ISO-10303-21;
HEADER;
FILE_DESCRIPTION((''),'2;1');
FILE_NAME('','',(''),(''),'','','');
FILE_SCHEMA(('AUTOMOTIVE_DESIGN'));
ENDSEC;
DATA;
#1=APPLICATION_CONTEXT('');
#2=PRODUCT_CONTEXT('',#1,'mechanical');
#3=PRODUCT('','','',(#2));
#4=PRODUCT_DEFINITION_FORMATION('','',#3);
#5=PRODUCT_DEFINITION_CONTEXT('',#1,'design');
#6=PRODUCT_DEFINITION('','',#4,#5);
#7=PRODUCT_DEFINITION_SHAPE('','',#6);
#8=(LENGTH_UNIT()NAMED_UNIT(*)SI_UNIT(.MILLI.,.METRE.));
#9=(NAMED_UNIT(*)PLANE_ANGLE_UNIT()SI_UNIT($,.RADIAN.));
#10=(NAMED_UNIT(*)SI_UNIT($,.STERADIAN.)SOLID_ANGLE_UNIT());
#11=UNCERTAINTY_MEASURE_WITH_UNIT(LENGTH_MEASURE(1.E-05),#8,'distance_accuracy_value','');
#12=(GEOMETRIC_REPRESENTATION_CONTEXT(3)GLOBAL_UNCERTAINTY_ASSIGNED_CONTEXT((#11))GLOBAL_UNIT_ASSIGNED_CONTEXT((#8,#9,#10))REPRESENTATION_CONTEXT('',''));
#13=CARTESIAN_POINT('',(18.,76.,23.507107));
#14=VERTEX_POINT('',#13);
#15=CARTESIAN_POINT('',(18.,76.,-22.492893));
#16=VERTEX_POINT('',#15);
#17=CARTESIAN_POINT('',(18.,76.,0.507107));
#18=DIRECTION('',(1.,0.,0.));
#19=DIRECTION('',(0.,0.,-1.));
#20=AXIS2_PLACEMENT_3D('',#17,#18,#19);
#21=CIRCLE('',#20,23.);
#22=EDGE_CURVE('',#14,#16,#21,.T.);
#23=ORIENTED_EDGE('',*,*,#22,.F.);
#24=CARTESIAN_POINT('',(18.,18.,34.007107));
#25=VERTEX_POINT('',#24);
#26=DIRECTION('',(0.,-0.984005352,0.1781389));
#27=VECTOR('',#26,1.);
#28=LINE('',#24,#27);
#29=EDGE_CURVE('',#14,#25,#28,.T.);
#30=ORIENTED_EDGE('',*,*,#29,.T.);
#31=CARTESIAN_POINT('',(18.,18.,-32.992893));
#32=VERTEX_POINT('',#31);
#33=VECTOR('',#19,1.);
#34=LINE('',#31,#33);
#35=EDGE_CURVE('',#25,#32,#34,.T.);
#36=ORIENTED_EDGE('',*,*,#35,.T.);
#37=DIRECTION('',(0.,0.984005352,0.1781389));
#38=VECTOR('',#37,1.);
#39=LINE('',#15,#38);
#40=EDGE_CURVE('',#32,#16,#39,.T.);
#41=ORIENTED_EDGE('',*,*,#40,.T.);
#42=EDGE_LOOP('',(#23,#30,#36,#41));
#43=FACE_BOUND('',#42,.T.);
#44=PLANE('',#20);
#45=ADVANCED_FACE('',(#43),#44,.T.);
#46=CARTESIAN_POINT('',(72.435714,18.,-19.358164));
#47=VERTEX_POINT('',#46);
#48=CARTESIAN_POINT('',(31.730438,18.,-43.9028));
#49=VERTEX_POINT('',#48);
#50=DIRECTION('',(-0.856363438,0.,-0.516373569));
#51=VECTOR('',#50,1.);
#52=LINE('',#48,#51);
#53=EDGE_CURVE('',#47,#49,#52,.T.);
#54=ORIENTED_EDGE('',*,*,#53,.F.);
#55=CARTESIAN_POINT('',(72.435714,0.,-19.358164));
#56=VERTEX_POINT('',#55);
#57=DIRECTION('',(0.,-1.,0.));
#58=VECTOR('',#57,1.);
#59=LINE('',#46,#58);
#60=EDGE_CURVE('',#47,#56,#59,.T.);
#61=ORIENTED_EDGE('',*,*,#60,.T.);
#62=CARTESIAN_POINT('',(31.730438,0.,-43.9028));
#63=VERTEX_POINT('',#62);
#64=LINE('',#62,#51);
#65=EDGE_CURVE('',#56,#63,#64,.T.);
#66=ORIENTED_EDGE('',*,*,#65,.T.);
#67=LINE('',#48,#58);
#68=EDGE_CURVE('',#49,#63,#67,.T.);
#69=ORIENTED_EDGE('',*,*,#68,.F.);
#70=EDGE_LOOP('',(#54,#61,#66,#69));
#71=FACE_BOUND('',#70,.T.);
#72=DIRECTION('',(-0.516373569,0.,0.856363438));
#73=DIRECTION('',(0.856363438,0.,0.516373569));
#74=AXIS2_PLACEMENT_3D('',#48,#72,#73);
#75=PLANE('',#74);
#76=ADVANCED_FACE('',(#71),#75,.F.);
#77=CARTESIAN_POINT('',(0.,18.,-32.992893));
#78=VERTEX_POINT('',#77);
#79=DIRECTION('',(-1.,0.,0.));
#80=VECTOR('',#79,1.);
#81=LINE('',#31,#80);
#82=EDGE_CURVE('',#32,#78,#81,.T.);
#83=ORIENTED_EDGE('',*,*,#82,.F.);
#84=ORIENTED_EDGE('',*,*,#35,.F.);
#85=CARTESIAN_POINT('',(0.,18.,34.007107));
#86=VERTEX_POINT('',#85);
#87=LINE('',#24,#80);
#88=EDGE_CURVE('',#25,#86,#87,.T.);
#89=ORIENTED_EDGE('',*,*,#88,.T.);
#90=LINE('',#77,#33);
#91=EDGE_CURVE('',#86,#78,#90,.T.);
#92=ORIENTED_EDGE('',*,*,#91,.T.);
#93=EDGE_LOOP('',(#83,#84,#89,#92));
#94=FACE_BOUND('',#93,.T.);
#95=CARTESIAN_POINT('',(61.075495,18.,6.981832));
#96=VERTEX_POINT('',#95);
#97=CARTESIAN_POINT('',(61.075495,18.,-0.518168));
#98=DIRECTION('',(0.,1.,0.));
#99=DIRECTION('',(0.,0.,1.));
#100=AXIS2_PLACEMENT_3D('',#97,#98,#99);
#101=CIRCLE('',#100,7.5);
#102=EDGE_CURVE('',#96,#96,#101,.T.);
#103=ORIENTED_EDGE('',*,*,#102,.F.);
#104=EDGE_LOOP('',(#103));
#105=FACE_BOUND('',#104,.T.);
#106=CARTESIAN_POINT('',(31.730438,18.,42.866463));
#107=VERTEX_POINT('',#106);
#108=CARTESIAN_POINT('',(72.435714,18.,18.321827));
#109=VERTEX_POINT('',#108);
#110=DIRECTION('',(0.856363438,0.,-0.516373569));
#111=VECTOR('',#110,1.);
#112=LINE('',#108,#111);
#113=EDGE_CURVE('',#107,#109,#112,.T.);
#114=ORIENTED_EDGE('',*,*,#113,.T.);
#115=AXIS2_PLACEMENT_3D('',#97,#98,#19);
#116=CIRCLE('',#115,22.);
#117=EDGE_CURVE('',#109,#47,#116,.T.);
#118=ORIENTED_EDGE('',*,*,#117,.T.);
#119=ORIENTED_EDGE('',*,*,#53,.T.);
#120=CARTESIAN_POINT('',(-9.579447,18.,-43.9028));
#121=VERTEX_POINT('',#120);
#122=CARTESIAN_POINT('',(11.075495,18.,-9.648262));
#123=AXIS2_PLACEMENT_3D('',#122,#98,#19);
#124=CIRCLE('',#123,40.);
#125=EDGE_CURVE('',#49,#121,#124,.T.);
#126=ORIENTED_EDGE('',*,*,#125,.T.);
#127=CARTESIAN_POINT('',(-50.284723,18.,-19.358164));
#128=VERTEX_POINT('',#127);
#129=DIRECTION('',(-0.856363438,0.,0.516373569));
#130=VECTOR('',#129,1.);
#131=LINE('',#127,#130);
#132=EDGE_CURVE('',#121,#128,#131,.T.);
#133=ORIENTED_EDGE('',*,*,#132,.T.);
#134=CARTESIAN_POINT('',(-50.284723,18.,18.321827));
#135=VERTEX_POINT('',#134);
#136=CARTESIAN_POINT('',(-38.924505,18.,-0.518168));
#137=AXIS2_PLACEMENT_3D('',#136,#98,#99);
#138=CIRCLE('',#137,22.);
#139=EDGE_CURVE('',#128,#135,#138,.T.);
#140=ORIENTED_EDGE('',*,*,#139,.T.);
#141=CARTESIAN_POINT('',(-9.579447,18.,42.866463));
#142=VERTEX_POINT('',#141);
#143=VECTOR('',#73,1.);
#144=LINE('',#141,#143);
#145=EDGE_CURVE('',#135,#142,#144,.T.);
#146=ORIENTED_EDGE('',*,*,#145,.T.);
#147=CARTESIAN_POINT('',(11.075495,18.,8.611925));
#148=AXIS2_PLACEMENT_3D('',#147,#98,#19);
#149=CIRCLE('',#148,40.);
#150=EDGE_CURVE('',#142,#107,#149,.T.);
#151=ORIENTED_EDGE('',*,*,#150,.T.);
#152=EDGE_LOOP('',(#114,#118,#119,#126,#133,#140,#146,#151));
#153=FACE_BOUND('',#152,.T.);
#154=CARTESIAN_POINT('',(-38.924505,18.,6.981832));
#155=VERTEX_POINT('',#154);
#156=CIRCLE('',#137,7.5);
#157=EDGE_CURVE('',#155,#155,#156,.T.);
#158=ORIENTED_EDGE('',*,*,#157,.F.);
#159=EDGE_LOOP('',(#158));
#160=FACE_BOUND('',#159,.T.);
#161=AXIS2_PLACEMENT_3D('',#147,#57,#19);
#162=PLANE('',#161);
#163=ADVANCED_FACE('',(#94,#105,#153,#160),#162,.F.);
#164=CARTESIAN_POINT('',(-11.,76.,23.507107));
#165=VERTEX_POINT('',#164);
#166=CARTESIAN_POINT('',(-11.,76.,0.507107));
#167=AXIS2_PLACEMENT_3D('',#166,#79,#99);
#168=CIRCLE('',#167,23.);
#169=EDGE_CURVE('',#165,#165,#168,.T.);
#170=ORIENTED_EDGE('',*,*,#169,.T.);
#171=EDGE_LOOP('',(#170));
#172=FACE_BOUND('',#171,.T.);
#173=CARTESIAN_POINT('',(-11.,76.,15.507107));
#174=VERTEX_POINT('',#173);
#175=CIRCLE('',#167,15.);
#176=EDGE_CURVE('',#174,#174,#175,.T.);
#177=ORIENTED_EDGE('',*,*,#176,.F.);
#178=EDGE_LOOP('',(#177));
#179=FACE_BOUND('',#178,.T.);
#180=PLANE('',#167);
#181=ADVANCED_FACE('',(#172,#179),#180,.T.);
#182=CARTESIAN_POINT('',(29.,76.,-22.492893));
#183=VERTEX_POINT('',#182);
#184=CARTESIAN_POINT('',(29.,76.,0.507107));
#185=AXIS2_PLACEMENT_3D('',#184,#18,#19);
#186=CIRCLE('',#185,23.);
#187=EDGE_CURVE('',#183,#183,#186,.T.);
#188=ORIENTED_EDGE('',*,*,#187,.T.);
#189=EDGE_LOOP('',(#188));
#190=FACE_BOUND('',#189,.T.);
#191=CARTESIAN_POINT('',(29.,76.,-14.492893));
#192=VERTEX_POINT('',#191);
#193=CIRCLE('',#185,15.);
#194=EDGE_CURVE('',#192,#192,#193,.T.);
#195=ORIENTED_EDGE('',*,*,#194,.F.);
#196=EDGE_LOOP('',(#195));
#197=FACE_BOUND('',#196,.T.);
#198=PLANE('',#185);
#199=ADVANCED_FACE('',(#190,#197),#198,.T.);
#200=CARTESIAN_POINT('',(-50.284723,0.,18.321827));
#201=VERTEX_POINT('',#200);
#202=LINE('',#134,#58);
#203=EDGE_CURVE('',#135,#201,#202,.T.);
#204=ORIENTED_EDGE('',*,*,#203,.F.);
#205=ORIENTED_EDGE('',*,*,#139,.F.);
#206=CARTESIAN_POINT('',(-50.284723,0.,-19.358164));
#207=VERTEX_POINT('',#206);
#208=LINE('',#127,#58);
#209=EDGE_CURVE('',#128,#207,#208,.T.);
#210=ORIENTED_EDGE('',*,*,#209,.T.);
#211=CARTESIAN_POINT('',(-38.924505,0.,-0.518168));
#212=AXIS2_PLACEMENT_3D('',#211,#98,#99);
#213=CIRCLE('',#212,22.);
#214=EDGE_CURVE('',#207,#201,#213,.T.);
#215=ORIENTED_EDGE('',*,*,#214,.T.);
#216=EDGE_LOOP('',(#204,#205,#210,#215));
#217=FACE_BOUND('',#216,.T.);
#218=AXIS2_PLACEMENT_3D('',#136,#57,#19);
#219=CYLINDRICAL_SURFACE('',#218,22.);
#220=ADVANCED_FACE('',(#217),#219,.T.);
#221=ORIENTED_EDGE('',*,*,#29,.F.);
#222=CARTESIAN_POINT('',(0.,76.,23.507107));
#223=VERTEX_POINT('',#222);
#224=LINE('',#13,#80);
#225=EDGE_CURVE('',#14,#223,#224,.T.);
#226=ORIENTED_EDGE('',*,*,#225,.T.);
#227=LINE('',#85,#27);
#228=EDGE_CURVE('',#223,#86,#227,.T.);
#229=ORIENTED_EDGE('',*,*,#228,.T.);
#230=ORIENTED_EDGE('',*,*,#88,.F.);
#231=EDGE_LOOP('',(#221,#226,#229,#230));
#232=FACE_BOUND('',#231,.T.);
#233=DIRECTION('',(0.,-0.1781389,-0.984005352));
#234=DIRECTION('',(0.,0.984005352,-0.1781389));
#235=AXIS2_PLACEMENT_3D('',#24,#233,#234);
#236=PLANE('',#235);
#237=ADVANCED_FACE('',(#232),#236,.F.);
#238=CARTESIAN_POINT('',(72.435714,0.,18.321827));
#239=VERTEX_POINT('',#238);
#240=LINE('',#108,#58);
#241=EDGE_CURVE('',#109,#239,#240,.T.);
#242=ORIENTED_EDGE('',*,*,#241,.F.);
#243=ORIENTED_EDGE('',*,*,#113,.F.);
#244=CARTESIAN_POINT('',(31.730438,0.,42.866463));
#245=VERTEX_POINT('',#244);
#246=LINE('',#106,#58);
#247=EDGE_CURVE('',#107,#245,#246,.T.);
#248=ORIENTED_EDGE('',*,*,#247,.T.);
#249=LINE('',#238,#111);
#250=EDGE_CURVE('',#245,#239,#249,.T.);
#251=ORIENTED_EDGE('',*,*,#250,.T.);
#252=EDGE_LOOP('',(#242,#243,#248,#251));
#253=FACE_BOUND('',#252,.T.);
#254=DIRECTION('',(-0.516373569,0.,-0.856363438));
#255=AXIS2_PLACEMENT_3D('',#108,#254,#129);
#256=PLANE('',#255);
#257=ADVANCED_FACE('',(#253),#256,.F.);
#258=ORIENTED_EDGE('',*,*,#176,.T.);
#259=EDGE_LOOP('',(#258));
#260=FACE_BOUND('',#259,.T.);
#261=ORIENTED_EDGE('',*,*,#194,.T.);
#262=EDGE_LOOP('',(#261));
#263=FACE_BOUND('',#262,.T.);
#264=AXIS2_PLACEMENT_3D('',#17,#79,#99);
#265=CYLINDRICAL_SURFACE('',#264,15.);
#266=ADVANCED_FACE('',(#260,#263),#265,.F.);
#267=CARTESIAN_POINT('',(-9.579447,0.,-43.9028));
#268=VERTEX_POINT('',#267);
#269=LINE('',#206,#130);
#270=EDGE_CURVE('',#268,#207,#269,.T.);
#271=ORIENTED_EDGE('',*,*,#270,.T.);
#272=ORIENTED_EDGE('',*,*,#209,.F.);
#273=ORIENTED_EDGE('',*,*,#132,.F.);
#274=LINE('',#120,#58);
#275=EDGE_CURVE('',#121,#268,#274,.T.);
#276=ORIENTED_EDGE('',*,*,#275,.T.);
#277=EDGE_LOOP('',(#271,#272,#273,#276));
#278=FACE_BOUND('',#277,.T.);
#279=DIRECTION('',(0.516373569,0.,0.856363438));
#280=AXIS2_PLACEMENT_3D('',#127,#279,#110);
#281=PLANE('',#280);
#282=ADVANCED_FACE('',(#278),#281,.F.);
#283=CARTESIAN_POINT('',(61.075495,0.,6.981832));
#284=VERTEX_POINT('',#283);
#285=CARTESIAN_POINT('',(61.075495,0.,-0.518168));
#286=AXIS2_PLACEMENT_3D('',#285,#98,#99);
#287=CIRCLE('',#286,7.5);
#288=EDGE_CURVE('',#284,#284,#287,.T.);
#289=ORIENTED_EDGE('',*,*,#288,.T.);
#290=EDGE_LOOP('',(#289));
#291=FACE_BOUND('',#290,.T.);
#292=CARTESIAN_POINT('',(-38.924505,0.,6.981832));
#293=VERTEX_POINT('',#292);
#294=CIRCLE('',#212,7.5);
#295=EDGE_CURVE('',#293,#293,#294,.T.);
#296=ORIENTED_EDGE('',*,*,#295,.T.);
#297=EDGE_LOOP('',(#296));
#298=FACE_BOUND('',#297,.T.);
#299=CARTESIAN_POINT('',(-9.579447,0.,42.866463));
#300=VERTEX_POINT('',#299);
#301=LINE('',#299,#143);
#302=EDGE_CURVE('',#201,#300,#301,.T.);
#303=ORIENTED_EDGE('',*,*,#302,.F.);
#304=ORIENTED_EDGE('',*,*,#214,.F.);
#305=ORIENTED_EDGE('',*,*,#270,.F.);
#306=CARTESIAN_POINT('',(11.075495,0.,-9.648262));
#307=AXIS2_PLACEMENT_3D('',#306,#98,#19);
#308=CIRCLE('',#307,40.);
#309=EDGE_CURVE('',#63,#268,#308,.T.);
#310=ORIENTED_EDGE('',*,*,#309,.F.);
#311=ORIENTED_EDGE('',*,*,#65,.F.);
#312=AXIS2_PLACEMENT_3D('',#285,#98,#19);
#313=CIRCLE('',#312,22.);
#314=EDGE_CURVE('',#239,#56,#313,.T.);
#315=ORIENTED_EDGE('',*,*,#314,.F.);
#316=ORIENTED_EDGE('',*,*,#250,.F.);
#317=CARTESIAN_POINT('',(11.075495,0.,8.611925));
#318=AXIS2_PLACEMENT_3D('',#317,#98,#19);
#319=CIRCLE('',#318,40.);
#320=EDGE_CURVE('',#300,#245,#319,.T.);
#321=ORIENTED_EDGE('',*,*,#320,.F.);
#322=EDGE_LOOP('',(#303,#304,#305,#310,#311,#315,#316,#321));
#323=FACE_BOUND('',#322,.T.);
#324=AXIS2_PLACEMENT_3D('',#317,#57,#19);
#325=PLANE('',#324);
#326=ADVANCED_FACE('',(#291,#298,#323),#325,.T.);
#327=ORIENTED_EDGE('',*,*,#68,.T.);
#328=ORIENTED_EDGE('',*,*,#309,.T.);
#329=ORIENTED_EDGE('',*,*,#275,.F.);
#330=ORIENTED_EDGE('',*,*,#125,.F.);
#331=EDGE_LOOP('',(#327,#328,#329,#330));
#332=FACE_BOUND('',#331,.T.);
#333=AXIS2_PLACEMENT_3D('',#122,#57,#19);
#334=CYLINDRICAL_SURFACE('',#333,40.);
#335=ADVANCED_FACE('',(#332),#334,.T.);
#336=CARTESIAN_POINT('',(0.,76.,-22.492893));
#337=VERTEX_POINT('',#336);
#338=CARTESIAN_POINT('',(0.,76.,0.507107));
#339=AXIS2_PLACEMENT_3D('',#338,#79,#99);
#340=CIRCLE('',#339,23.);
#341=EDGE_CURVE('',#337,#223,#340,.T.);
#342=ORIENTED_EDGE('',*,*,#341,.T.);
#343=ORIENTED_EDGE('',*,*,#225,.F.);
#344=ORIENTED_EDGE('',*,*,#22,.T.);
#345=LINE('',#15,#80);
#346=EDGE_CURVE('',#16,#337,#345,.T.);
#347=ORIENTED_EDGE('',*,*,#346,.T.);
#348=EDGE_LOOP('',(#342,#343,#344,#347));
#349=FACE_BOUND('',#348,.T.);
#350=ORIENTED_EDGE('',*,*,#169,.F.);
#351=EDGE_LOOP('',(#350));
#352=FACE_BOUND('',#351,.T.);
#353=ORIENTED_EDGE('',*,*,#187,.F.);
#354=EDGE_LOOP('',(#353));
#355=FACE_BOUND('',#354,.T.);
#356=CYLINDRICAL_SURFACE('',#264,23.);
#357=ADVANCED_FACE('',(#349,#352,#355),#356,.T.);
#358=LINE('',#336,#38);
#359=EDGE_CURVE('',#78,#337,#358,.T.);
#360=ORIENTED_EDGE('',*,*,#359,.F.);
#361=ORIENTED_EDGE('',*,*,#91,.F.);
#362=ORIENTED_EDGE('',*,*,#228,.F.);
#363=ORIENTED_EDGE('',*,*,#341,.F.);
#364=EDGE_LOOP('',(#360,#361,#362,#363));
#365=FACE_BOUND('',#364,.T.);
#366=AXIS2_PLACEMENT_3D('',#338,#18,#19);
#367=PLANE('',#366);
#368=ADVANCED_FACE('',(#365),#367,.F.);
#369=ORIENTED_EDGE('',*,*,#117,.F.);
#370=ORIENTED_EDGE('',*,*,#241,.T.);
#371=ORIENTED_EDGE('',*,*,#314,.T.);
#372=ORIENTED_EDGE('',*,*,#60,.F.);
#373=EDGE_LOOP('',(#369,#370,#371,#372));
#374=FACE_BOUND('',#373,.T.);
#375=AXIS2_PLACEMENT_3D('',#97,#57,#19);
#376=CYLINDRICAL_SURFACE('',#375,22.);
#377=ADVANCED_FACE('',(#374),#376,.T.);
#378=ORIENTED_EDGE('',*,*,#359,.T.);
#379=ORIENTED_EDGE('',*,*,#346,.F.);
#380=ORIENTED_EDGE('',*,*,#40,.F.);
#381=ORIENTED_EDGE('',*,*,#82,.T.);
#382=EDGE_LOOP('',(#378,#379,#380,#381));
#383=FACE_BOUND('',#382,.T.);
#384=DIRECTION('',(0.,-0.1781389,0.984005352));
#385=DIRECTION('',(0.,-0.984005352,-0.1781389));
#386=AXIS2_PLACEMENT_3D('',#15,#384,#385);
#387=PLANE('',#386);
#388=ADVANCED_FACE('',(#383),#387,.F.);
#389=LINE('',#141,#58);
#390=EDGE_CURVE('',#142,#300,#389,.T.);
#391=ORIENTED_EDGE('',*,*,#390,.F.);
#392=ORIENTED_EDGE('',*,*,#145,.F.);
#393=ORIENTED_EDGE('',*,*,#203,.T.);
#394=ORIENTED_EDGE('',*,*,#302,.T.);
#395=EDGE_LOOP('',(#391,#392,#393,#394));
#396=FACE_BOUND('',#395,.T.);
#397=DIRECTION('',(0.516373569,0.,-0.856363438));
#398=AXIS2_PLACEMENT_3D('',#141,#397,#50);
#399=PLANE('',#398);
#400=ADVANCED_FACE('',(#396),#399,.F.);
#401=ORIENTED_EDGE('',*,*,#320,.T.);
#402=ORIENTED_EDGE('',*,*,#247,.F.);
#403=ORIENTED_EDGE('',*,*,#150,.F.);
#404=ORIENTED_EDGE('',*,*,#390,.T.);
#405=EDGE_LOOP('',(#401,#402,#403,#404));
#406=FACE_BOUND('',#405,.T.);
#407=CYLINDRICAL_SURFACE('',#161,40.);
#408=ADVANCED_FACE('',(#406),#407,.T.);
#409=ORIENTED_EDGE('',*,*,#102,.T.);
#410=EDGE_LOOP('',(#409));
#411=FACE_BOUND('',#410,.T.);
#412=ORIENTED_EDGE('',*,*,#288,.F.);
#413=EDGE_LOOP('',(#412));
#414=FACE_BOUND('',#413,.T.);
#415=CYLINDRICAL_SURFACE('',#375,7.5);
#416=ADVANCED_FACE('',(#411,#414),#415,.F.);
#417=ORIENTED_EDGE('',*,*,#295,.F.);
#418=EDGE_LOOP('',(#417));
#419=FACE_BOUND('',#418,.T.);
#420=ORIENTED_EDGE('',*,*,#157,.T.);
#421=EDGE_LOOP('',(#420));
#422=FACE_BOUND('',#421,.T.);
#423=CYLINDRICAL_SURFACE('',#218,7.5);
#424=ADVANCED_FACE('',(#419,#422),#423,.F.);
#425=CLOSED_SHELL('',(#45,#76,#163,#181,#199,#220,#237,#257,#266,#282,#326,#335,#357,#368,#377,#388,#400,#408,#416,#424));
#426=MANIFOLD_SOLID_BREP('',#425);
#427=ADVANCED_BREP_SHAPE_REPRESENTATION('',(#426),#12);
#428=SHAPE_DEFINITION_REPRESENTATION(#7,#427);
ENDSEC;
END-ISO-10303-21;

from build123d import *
from build123d.topology import SkipClean

# Parameters (mm, degrees)
SKETCH2_R           = 7.5
BOSS_EXTRUDE1_DEPTH = 18
SKETCH6_R           = 15
BOSS_EXTRUDE2_DEPTH = 18
SKETCH7_R           = 23
SKETCH7_R_2         = 15
BOSS_EXTRUDE3_DEPTH = 11
BOSS_EXTRUDE4_START = 11
SKETCH8_R           = 23
SKETCH8_R_2         = 15
BOSS_EXTRUDE4_DEPTH = 11


with BuildPart() as part:
    # Sketch2 → Boss-Extrude1 (new body)
    with BuildSketch(Plane(origin=(0, 0, 0), x_dir=(1, 0, 0), z_dir=(0, 1, 0))):
        with BuildLine():
            Line((-50.28472319, 19.35816392), (-9.579447433, 43.902799527))
            ThreePointArc((-9.579447433, 43.902799527), (11.075495329, 49.648262025), (31.730438092, 43.902799527))
            Line((31.730438092, 43.902799527), (72.435713849, 19.35816392))
            ThreePointArc((72.435713849, 19.35816392), (83.075495329, 0.518168294), (72.435713849, -18.321827333))
            Line((72.435713849, -18.321827333), (31.730438092, -42.86646294))
            ThreePointArc((31.730438092, -42.86646294), (11.075495329, -48.611925438), (-9.579447433, -42.86646294))
            Line((-9.579447433, -42.86646294), (-50.28472319, -18.321827333))
            ThreePointArc((-50.28472319, -18.321827333), (-60.924504671, 0.518168294), (-50.28472319, 19.35816392))
        make_face()
        with Locations((-38.924504671, 0.518168294)):
            Circle(SKETCH2_R, mode=Mode.SUBTRACT)
        with Locations((61.075495329, 0.518168294)):
            Circle(SKETCH2_R, mode=Mode.SUBTRACT)
    extrude(amount=BOSS_EXTRUDE1_DEPTH)

    # Sketch6 → Boss-Extrude2 (add)
    with BuildSketch(Plane(origin=(0, 0, 0), x_dir=(0, 0, -1), z_dir=(1, 0, 0))):
        with BuildLine():
            Line((-34.007106684, 18), (-23.507106684, 76))
            ThreePointArc((-23.507106684, 76), (-0.507106684, 99), (22.492893316, 76))
            Line((22.492893316, 76), (32.992893316, 18))
            Line((32.992893316, 18), (-34.007106684, 18))
        make_face()
        with Locations((-0.507106684, 76)):
            Circle(SKETCH6_R, mode=Mode.SUBTRACT)
    extrude(amount=BOSS_EXTRUDE2_DEPTH)

    # Sketch7 → Boss-Extrude3 (add)
    with SkipClean():  # the faces are left unmerged after this step: merging them gives an invalid solid
        with BuildSketch(Plane(origin=(18, 0, 0), x_dir=(0, 0, -1), z_dir=(1, 0, 0))):
            with Locations((-0.507106684, 76)):
                Circle(SKETCH7_R)
            with Locations((-0.507106684, 76)):
                Circle(SKETCH7_R_2, mode=Mode.SUBTRACT)
        extrude(amount=BOSS_EXTRUDE3_DEPTH)
    add(part.part.scale(1), mode=Mode.REPLACE)  # the faces are merged on a copy

    # Sketch8 → Boss-Extrude4 (add)
    with SkipClean():  # the faces are left unmerged after this step: merging them gives an invalid solid
        with BuildSketch(Plane.ZY.offset(BOSS_EXTRUDE4_START)):
            with Locations((0.507106684, 76)):
                Circle(SKETCH8_R)
            with Locations((0.507106684, 76)):
                Circle(SKETCH8_R_2, mode=Mode.SUBTRACT)
        extrude(amount=-BOSS_EXTRUDE4_DEPTH)
    add(part.part.scale(1), mode=Mode.REPLACE)  # the faces are merged on a copy


solid = part.part
